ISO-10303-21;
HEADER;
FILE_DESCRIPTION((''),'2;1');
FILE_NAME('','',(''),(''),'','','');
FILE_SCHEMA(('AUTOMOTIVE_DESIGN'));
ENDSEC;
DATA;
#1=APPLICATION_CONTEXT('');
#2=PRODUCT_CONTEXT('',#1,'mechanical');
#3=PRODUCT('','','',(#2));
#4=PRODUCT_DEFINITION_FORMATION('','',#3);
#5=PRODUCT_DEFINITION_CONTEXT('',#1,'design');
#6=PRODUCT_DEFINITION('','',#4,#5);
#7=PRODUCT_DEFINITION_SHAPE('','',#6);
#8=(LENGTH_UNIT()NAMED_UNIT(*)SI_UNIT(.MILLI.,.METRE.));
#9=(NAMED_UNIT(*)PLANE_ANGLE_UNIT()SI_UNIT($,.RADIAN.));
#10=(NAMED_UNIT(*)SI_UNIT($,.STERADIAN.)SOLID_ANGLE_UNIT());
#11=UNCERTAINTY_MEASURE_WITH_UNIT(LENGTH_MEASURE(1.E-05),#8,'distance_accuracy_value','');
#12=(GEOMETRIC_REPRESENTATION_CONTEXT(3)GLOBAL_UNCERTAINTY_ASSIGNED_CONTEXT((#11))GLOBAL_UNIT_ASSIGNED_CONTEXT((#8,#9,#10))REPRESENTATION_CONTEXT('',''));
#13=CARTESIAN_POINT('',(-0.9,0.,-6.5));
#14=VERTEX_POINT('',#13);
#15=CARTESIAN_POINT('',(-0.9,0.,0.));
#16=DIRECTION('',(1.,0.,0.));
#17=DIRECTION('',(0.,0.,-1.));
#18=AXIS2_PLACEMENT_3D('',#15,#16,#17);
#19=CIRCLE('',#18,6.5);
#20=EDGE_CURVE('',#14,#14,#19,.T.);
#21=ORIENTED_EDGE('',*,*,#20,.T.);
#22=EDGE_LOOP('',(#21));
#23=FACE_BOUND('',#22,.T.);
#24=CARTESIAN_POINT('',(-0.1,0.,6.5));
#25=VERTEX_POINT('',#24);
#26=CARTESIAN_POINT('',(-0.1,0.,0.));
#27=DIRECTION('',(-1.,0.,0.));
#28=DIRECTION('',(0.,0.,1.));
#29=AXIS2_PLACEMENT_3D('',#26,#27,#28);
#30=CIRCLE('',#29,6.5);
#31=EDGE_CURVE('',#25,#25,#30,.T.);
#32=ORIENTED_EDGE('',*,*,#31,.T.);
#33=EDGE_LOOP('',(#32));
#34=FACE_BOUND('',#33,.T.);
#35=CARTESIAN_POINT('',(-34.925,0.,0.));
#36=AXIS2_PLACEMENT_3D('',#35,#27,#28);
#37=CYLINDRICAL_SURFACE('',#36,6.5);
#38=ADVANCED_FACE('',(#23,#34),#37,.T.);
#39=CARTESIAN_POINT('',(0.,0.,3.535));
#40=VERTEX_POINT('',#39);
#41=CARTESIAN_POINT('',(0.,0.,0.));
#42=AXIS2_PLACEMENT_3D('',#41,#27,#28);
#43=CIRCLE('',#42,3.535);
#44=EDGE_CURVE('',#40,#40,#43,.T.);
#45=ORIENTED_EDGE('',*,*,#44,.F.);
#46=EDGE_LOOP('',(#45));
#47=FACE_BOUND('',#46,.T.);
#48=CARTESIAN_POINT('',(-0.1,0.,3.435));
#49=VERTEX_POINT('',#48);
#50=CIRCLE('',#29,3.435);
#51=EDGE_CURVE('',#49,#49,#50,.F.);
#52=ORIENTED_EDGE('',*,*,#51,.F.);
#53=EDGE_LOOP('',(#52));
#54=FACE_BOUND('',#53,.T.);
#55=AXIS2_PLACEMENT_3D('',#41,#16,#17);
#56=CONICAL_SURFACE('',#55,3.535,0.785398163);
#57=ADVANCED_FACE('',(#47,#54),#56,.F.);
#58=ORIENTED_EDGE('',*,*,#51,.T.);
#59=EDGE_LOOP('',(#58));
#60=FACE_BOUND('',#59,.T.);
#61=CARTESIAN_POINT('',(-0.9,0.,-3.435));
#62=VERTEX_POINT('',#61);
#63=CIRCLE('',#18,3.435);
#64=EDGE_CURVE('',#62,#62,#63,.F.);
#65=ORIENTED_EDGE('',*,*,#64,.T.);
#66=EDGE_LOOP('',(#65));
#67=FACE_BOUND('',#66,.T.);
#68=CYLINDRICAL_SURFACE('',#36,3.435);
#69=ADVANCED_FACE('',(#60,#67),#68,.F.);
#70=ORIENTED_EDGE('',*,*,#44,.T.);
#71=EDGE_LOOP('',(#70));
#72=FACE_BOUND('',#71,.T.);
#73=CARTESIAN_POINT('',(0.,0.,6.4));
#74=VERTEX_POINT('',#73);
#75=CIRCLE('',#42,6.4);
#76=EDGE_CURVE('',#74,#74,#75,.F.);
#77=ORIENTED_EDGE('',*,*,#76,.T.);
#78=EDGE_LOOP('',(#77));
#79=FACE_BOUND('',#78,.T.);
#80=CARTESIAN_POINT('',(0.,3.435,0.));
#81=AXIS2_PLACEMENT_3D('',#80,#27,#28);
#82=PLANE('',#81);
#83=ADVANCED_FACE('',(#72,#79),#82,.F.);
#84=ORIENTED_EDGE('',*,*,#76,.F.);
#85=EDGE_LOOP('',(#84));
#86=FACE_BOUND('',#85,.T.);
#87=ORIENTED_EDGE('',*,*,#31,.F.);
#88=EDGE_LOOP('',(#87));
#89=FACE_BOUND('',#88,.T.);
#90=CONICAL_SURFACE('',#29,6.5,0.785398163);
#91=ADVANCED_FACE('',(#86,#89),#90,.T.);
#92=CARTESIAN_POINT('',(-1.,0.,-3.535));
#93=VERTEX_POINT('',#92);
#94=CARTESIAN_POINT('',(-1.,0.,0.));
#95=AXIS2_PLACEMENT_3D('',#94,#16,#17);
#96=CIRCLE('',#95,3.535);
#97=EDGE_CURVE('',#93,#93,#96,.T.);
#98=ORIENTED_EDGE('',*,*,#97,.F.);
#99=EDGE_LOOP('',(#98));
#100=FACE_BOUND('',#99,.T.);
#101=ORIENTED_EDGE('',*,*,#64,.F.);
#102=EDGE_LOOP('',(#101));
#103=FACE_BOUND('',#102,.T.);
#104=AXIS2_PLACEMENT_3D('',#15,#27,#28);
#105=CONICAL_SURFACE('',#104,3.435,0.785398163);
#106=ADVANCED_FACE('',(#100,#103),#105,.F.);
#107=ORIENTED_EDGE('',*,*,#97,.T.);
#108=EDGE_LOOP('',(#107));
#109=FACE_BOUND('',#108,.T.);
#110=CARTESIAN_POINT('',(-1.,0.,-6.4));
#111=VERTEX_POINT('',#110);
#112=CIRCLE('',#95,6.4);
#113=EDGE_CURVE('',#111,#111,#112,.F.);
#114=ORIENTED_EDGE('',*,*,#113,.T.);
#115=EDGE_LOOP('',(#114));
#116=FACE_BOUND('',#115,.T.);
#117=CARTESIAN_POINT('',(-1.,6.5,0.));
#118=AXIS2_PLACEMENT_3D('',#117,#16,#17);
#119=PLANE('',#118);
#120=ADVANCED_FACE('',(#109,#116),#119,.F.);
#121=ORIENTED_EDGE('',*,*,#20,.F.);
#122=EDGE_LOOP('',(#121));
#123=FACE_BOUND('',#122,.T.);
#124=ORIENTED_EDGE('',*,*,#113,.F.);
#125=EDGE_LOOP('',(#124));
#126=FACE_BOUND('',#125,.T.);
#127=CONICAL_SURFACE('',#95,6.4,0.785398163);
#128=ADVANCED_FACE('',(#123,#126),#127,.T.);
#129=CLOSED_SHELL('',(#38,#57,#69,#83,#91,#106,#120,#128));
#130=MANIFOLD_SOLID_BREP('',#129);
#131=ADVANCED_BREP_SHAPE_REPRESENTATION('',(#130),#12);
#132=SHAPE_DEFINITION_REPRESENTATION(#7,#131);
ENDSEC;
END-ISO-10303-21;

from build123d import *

# Parameters (mm, degrees)
SKETCH1_W     = 1.75
SKETCH1_H     = 3.065
CHAMFER1_SIZE = 0.1


# Read off the part's stored shape, not the designer's step: Move Face1
with BuildPart() as part:
    # Sketch1 → Base-Revolve (revolve)
    with BuildSketch(Plane.XY, mode=Mode.PRIVATE) as base_revolve_sk:
        with Locations((-0.875, 4.9675)):
            Rectangle(SKETCH1_W, SKETCH1_H)
    revolve(base_revolve_sk.sketch.rotate(Axis((-34.925, 0, 0), (1, 0, 0)), 90), axis=Axis((-34.925, 0, 0), (1, 0, 0)))

    # Chamfer1
    chamfer1_edges = [part.edges().sort_by_distance(p)[0] for p in [
        (-1.75, 0, -3.435),
        (-1.75, 0, -6.5),
        (0, 0, -6.5),
        (0, 0, -3.435),
    ]]
    chamfer(chamfer1_edges, length=CHAMFER1_SIZE)

    # Move Face1 outline → Move Face1 (revolve, cut)
    with BuildSketch(Plane.YX):
        Polygon((6.4, -1), (3.535, -1), (3.435, -0.9), (3.435, -1.65), (3.535, -1.75), (6.4, -1.75), (6.5, -1.65), (6.5, -0.9), align=None)
    revolve(axis=Axis((0, 0, 0), (1, 0, 0)), mode=Mode.SUBTRACT)


solid = part.part
